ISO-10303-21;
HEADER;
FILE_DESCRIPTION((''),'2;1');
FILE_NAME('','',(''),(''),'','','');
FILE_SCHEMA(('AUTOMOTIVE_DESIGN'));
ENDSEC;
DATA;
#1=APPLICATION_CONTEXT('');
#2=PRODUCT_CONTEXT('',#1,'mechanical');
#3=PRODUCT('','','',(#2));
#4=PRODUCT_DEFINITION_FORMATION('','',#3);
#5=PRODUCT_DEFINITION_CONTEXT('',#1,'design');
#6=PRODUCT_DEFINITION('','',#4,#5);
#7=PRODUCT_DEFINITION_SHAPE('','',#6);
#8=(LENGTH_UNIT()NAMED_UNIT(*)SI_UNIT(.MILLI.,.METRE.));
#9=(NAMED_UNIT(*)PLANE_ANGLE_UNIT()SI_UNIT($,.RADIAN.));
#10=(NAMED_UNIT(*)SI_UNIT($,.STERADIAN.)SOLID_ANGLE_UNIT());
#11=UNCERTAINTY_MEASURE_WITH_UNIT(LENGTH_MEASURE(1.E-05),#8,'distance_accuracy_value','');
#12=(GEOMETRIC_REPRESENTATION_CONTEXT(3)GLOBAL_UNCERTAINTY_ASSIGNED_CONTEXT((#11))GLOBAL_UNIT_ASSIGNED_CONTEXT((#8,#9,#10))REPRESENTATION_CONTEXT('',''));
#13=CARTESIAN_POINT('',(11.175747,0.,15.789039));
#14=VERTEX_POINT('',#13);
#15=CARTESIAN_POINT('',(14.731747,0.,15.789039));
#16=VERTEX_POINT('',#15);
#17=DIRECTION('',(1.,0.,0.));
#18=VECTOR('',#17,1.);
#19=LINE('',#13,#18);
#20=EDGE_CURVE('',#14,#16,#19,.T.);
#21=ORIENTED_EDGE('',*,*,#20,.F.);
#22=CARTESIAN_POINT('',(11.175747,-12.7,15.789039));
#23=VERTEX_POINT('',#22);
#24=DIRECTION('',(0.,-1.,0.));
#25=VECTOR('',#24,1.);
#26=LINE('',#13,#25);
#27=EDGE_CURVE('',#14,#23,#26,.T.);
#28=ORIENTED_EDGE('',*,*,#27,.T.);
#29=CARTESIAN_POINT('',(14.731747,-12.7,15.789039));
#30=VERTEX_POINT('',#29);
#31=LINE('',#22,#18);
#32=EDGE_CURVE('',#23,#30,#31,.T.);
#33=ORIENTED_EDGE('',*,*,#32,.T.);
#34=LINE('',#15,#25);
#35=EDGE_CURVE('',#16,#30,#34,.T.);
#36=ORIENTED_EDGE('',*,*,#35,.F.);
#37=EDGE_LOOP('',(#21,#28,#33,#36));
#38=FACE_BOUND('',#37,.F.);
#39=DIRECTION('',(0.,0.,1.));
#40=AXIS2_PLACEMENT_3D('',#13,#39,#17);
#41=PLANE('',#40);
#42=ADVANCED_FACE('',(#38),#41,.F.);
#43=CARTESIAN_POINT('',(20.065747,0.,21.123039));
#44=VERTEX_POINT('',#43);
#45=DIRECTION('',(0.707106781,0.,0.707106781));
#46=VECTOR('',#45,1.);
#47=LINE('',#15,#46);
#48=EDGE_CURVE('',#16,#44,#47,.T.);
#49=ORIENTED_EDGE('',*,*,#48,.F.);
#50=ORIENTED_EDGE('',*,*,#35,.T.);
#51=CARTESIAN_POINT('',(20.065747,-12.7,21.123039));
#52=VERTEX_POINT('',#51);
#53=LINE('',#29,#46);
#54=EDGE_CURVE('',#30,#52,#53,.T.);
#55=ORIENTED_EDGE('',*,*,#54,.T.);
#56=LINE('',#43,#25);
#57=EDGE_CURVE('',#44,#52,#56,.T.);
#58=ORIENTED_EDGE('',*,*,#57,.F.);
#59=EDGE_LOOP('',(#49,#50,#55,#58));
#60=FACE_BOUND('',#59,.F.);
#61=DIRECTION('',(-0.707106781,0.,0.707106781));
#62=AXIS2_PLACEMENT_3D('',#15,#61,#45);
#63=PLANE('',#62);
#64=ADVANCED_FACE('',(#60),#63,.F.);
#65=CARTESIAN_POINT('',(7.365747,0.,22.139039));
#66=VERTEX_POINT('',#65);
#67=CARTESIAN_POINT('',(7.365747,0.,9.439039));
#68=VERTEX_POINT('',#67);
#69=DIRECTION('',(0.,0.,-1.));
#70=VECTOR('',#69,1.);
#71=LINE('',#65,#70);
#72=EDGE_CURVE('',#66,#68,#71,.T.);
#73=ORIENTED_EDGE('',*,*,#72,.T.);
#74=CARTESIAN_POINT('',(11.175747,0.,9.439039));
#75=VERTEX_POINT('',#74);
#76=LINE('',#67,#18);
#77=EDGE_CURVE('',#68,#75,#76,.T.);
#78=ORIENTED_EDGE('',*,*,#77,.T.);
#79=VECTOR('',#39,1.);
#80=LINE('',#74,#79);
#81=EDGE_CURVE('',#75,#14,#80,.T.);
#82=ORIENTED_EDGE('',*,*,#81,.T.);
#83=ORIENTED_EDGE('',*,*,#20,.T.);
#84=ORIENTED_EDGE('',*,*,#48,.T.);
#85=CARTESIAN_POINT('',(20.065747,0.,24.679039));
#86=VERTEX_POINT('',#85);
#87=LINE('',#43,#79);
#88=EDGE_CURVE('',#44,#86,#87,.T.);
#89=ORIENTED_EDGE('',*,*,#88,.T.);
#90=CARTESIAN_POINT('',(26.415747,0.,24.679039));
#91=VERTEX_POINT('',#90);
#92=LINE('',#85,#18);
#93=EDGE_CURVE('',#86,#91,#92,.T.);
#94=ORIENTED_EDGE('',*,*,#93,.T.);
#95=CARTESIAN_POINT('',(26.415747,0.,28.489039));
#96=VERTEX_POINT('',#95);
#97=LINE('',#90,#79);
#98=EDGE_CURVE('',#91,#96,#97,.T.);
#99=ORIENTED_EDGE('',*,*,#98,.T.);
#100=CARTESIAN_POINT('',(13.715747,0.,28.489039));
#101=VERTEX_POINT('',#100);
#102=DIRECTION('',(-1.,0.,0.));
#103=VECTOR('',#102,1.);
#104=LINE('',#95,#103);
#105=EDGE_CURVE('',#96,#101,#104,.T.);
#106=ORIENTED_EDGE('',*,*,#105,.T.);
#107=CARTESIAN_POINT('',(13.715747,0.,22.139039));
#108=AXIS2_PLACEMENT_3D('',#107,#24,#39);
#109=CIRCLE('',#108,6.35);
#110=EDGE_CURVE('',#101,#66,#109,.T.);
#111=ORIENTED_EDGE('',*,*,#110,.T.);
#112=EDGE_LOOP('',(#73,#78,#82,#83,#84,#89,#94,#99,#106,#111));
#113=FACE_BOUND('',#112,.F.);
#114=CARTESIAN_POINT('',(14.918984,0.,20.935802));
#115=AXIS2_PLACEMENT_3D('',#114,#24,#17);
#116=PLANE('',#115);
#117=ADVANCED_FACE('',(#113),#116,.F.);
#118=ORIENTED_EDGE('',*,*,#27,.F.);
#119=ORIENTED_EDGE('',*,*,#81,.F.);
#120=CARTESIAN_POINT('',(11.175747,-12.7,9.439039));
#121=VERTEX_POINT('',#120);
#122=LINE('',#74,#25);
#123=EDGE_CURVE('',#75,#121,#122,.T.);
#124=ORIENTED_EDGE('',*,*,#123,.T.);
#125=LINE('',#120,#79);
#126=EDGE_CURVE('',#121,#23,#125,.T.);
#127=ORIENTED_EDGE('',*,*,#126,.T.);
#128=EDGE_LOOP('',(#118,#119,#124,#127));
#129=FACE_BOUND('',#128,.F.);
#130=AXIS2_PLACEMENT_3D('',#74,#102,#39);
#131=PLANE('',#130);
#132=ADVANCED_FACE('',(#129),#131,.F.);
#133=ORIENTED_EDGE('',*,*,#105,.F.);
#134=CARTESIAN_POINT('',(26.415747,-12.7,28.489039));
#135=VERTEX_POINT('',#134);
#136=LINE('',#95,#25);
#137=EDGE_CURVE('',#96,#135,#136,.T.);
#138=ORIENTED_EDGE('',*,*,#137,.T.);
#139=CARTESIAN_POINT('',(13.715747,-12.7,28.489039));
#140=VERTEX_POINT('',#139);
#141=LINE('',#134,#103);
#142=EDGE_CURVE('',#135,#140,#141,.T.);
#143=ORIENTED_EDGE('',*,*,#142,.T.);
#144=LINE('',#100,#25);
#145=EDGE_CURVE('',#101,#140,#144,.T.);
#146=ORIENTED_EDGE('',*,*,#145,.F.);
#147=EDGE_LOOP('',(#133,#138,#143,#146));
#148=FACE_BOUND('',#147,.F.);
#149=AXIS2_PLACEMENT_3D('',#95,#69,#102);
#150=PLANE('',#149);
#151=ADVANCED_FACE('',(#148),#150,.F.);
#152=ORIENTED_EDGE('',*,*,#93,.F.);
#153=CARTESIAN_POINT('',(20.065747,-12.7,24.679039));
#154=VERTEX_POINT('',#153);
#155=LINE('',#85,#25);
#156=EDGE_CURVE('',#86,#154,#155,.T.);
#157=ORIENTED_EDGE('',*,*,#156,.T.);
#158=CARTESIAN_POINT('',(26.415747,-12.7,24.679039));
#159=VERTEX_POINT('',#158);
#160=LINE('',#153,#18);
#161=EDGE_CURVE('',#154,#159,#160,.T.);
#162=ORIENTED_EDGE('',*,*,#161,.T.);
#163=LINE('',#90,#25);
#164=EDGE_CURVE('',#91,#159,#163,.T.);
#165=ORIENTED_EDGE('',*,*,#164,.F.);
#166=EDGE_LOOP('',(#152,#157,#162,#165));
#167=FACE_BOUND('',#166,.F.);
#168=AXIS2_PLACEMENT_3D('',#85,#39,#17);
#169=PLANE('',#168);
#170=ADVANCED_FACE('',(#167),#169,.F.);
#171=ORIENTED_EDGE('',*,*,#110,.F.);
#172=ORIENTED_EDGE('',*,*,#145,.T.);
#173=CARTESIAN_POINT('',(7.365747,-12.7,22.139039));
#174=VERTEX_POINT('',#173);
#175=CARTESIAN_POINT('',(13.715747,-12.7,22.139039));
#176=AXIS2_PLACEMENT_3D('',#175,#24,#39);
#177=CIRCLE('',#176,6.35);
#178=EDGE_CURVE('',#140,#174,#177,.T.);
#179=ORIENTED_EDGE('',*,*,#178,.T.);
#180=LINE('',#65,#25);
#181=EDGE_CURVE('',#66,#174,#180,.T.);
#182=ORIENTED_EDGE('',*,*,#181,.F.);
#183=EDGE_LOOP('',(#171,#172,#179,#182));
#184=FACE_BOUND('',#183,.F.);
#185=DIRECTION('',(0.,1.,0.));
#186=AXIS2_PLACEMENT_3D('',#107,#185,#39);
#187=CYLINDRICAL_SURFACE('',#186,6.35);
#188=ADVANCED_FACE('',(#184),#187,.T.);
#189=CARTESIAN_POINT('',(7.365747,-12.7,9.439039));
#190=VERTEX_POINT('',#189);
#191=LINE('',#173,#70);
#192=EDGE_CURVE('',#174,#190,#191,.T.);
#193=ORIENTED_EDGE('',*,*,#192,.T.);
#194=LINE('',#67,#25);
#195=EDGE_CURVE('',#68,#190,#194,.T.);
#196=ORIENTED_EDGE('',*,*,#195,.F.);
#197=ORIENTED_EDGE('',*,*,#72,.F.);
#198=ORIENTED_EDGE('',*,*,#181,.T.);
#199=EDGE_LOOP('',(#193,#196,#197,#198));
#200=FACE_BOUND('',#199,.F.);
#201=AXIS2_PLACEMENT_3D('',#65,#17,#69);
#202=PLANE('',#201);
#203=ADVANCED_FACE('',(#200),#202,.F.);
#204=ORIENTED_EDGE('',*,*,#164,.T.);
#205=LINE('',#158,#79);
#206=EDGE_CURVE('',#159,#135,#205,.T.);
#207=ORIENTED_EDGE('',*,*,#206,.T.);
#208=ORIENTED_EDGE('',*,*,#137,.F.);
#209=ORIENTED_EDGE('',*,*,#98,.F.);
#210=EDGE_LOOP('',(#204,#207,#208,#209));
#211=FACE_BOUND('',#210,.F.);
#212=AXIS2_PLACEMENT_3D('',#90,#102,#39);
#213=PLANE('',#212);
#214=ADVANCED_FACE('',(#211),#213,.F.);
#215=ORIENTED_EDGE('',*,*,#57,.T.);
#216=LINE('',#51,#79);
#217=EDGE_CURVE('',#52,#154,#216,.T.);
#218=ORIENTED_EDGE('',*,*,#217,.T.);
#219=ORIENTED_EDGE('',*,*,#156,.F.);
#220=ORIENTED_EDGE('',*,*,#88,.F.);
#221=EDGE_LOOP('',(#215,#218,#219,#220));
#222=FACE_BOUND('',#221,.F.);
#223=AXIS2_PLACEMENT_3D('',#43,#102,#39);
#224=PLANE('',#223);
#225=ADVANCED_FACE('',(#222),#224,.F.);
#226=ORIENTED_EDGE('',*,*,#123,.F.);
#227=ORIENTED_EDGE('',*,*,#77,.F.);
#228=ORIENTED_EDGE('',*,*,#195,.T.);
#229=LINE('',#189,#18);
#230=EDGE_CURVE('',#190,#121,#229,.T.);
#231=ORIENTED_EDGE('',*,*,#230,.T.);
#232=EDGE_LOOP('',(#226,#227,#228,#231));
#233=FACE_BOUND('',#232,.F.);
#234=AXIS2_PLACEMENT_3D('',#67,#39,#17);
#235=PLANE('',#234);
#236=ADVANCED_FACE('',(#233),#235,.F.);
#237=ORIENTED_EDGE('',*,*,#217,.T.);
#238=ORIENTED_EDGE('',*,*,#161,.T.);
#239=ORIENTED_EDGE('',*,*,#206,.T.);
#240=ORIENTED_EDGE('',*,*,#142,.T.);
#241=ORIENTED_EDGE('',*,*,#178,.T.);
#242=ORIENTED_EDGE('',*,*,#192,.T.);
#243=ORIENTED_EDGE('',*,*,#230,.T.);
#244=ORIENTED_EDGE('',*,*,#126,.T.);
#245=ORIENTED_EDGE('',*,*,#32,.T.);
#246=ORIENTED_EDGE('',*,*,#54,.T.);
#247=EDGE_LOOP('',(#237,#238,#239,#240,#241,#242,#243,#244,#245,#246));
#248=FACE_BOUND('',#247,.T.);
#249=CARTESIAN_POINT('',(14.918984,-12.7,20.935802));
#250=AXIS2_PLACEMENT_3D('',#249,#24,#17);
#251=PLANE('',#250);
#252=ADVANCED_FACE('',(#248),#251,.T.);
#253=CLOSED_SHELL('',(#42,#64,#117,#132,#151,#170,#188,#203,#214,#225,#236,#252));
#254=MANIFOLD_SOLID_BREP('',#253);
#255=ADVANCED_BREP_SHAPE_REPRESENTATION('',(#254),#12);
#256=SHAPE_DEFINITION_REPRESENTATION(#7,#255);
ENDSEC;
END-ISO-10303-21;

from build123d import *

# Parameters (mm, degrees)
F1_DEPTH = 12.7


# Not quite as in the source:
# - a feature names something its author has since deleted; it is built from what else it names


with BuildPart() as f1:
    # F0 (on Front) → F1 (new body)
    with BuildSketch(Plane.XZ):
        with BuildLine():
            Line((20.065747093, 21.1230388888), (20.065747093, 24.6790388888))
            Line((20.065747093, 24.6790388888), (26.415747093, 24.6790388888))
            Line((26.415747093, 24.6790388888), (26.415747093, 28.4890388888))
            Line((26.415747093, 28.4890388888), (13.715747093, 28.4890388888))
            ThreePointArc((13.715747093, 28.4890388888), (9.2256190324, 26.6291669493), (7.365747093, 22.1390388888))
            Line((7.365747093, 22.1390388888), (7.365747093, 9.4390388888))
            Line((7.365747093, 9.4390388888), (11.175747093, 9.4390388888))
            Line((11.175747093, 9.4390388888), (11.175747093, 15.7890388888))
            Line((11.175747093, 15.7890388888), (14.731747093, 15.7890388888))
            Line((14.731747093, 15.7890388888), (20.065747093, 21.1230388888))
        make_face()
    extrude(amount=F1_DEPTH)


solid = f1.part
